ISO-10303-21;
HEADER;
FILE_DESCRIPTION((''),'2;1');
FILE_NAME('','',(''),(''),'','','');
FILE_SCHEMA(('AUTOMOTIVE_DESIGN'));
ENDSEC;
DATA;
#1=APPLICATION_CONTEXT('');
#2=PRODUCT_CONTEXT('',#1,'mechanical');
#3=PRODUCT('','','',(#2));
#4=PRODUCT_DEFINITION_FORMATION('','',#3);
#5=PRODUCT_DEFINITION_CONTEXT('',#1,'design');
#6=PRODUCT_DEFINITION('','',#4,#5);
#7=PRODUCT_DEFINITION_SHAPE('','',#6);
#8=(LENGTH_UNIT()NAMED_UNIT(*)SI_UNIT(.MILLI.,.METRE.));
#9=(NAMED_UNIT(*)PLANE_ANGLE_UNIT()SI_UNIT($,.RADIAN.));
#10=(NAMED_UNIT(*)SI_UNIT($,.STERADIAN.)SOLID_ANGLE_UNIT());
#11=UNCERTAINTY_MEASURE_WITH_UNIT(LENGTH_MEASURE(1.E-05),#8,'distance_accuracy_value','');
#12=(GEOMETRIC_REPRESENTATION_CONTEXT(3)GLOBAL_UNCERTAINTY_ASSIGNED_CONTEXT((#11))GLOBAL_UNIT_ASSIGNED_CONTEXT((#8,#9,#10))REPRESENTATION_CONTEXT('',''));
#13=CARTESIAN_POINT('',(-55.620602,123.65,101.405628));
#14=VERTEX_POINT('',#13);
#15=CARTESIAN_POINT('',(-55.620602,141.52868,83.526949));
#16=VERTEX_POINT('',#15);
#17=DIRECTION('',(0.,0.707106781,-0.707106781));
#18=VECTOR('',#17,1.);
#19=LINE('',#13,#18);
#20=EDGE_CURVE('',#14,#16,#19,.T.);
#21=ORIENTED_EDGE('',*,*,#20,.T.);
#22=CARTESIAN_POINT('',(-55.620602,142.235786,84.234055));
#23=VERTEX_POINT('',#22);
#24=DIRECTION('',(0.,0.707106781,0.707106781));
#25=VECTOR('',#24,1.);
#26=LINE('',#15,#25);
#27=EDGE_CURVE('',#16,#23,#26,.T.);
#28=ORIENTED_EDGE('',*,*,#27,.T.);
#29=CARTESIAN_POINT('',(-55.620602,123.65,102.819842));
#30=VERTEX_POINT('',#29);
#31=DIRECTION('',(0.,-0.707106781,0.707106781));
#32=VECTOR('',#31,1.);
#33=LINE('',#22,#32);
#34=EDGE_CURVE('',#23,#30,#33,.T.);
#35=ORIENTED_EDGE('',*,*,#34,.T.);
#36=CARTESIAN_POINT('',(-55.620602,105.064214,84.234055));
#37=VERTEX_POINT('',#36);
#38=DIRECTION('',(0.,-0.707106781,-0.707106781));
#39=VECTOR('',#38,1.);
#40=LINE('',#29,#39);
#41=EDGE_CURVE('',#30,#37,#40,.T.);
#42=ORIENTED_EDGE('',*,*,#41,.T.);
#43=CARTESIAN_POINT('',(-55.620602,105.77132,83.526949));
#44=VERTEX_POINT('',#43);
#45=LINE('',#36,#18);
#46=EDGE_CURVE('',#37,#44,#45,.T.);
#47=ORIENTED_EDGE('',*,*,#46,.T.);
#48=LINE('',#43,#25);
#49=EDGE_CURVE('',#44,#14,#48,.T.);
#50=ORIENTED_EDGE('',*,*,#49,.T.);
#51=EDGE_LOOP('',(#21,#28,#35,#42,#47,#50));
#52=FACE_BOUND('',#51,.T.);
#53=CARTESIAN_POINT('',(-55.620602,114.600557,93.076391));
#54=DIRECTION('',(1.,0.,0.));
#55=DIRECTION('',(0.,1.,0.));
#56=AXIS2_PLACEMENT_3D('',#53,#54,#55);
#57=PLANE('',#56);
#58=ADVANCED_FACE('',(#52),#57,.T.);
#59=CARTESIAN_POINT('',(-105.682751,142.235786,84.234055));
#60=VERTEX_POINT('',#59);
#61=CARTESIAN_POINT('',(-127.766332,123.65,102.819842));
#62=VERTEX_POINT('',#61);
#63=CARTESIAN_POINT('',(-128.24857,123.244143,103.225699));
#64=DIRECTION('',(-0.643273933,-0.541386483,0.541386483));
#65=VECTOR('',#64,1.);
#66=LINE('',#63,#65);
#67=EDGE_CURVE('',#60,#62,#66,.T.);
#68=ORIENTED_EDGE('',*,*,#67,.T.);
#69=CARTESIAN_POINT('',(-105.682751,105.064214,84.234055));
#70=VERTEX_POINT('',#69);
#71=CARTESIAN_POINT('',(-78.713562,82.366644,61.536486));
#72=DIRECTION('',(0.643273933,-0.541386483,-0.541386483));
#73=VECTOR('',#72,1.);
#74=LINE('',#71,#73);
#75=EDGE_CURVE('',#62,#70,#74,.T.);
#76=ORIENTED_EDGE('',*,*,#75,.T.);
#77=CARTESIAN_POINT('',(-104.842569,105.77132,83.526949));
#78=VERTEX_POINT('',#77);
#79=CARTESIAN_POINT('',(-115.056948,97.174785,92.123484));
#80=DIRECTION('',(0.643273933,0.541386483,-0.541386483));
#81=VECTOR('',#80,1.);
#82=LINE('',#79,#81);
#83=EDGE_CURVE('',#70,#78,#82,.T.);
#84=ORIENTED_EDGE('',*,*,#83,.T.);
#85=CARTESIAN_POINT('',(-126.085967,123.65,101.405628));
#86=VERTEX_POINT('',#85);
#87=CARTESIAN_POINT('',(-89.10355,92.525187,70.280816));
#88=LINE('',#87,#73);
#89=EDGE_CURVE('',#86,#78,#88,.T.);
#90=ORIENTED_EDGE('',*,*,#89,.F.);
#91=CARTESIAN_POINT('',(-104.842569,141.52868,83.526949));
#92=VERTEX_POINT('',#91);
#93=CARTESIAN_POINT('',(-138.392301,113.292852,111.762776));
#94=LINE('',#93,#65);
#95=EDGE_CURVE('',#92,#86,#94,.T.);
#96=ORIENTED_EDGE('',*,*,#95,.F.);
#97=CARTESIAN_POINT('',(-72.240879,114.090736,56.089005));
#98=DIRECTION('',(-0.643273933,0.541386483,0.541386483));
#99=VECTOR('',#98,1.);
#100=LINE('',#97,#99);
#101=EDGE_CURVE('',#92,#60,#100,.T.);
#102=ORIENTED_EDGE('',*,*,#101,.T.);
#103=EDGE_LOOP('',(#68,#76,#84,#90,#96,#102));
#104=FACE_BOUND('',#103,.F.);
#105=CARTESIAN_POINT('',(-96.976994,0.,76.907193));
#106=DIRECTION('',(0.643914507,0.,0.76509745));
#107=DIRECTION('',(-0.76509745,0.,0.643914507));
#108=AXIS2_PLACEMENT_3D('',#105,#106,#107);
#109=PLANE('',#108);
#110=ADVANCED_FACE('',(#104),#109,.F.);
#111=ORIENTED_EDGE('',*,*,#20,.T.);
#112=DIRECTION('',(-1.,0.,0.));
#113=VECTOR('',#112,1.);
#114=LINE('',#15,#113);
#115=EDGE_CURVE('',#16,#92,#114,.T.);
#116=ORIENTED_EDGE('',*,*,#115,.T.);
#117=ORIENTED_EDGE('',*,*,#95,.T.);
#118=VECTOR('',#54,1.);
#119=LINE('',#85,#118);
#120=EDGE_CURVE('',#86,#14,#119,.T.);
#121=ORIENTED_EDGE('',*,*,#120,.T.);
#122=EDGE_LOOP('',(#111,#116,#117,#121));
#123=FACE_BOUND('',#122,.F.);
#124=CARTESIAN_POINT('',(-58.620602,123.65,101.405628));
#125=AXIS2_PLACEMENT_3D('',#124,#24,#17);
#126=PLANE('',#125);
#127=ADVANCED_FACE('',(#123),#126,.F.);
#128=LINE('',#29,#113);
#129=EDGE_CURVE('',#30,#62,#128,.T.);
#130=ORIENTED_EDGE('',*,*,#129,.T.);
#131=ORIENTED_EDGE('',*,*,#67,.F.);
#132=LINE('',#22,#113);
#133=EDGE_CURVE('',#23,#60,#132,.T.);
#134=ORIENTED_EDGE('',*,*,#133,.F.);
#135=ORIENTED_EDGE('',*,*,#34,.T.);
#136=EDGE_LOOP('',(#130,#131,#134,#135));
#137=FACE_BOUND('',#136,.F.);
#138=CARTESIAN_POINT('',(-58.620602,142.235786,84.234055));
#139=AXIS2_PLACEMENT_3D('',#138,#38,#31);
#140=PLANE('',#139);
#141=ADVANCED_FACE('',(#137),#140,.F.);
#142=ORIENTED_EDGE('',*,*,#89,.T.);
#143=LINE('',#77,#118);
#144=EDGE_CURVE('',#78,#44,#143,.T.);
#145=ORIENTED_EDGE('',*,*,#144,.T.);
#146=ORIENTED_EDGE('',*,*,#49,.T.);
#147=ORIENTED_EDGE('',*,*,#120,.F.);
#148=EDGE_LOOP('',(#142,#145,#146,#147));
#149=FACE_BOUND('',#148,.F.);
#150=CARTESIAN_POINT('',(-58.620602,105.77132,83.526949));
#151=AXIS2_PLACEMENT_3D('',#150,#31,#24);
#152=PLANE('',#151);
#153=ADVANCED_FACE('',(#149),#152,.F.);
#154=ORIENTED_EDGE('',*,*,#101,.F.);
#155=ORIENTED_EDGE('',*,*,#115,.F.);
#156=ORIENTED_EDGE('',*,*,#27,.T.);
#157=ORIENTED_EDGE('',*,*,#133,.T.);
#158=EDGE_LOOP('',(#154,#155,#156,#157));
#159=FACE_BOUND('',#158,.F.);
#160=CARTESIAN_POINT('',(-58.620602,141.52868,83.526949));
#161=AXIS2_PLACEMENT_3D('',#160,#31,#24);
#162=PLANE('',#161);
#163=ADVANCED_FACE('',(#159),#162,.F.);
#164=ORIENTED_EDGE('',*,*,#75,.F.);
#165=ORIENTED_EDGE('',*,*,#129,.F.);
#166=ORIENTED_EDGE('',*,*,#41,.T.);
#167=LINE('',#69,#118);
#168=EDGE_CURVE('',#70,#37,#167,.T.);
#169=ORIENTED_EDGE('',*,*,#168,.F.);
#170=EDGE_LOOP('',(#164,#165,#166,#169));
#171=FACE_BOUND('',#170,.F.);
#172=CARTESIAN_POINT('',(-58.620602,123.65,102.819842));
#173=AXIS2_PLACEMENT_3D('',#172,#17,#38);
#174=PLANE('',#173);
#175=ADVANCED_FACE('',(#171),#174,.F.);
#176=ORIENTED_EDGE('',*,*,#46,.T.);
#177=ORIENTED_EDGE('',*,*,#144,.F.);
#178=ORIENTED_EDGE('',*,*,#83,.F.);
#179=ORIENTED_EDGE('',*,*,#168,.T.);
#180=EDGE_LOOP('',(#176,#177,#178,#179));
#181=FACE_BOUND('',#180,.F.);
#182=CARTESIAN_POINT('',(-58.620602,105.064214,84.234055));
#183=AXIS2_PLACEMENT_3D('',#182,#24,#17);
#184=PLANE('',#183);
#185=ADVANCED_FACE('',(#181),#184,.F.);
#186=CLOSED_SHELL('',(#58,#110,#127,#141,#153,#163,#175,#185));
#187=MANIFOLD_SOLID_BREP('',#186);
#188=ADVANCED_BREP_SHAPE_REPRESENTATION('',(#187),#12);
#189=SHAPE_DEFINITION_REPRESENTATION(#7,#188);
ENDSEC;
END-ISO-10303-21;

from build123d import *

# Parameters (mm, degrees)
F1_DEPTH  = 247.3
F3_DEPTH  = 300
F4_DEPTH  = 50
F5_DEPTH  = 59.1
F6_DEPTH  = 300
F7_DEPTH  = 300
F8_DEPTH  = 17.109
F9_DEPTH  = 1.9
F10_DEPTH = 1
F11_DEPTH = 3


with BuildPart() as f1:
    # F0 (on Front) → F1 (new body)
    with BuildSketch(Plane.XZ):
        Polygon((-78.8866152354, 43.4383174348), (-78.6296018241, 42.9628188217), (-78.6296018241, 102.819841868), (-127.7663317061, 102.819841868), (-96.9769939736, 76.9071934711), align=None)
        Polygon((-79.7663317061, 42.9628188217), (-97.7663317061, 76.264485822), (-127.7663317061, 101.5128188217), (-157.7663317061, 76.264485822), (-175.7663317061, 42.9628188217), align=None)
        Polygon((-127.7663317061, 101.5128188217), (-97.7663317061, 76.264485822), (-79.7663317061, 42.9628188217), (-78.6296018241, 42.9628188217), (-78.8866152354, 43.4383174348), (-96.9769939736, 76.9071934711), (-127.7663317061, 102.819841868), (-158.5556694386, 76.9071934711), (-176.9030615881, 42.9628188217), (-175.7663317061, 42.9628188217), (-157.7663317061, 76.264485822), align=None)
        Polygon((-176.9030615881, 102.819841868), (-176.9030615881, 42.9628188217), (-158.5556694386, 76.9071934711), (-127.7663317061, 102.819841868), align=None)
    extrude(amount=-F1_DEPTH)

    # F0 (on Front) → F3 (cut)
    with BuildSketch(Plane.XZ):
        Polygon((-78.8866152354, 43.4383174348), (-78.6296018241, 42.9628188217), (-78.6296018241, 102.819841868), (-127.7663317061, 102.819841868), (-96.9769939736, 76.9071934711), align=None)
    extrude(amount=-F3_DEPTH, mode=Mode.SUBTRACT)

    # F2 (on face) → F4 (join)
    with BuildSketch(Plane.YZ.offset(-78.6296018241)):
        Polygon((142.2357864376, 84.2340554304), (123.65, 102.819841868), (123.65, 101.4056283057), (141.5286796564, 83.5269486492), align=None)
        Polygon((123.65, 101.4056283057), (123.65, 102.819841868), (105.0642135624, 84.2340554304), (105.7713203436, 83.5269486492), align=None)
    extrude(amount=-F4_DEPTH)

    # F2 (on face) → F5 (join)
    with BuildSketch(Plane.YZ.offset(-78.6296018241)):
        Polygon((103.65, 42.9628188217), (123.65, 42.9628188217), (123.65, 82.819841868), (106.4784271247, 82.819841868), (105.0642135624, 82.819841868), (103.65, 82.819841868), align=None)
        Polygon((123.65, 42.9628188217), (143.65, 42.9628188217), (143.65, 82.819841868), (142.2357864376, 82.819841868), (140.8215728753, 82.819841868), (123.65, 82.819841868), align=None)
    extrude(amount=-F5_DEPTH)

    # F2 (on face) → F6 (cut)
    with BuildSketch(Plane.YZ.offset(-78.6296018241)):
        Polygon((247.3, 42.9628188217), (247.3, 102.819841868), (123.65, 102.819841868), (142.2357864376, 84.2340554304), (141.5286796564, 83.5269486492), (142.2357864376, 82.819841868), (143.65, 82.819841868), (143.65, 42.9628188217), align=None)
        Polygon((105.0642135624, 84.2340554304), (123.65, 102.819841868), (0, 102.819841868), (0, 42.9628188217), (103.65, 42.9628188217), (103.65, 82.819841868), (105.0642135624, 82.819841868), (105.7713203436, 83.5269486492), align=None)
        Polygon((123.65, 42.9628188217), (143.65, 42.9628188217), (143.65, 82.819841868), (142.2357864376, 82.819841868), (140.8215728753, 82.819841868), (123.65, 82.819841868), align=None)
        Polygon((103.65, 42.9628188217), (123.65, 42.9628188217), (123.65, 82.819841868), (106.4784271247, 82.819841868), (105.0642135624, 82.819841868), (103.65, 82.819841868), align=None)
    extrude(amount=-F6_DEPTH, mode=Mode.SUBTRACT)

    # F0 (on Front) → F7 (cut)
    with BuildSketch(Plane.XZ):
        Polygon((-176.9030615881, 102.819841868), (-176.9030615881, 42.9628188217), (-158.5556694386, 76.9071934711), (-127.7663317061, 102.819841868), align=None)
        Polygon((-127.7663317061, 101.5128188217), (-97.7663317061, 76.264485822), (-79.7663317061, 42.9628188217), (-78.6296018241, 42.9628188217), (-78.8866152354, 43.4383174348), (-96.9769939736, 76.9071934711), (-127.7663317061, 102.819841868), (-158.5556694386, 76.9071934711), (-176.9030615881, 42.9628188217), (-175.7663317061, 42.9628188217), (-157.7663317061, 76.264485822), align=None)
        Polygon((-79.7663317061, 42.9628188217), (-97.7663317061, 76.264485822), (-127.7663317061, 101.5128188217), (-157.7663317061, 76.264485822), (-175.7663317061, 42.9628188217), align=None)
    extrude(amount=-F7_DEPTH, mode=Mode.SUBTRACT)

    # F2 (on face) → F8 (join)
    with BuildSketch(Plane.YZ.offset(-78.6296018241)):
        Polygon((123.65, 101.4056283057), (123.65, 102.819841868), (105.0642135624, 84.2340554304), (105.7713203436, 83.5269486492), align=None)
        Polygon((142.2357864376, 84.2340554304), (123.65, 102.819841868), (123.65, 101.4056283057), (141.5286796564, 83.5269486492), align=None)
    extrude(amount=F8_DEPTH)

    # F9 (add): a face of the model
    f9_faces = [f1.faces().sort_by_distance(p)[0] for p in [
        (-61.5206018241, 114.6532437055, 93.2308117249),
    ]]
    extrude(f9_faces, amount=F9_DEPTH)

    # F10 (add): a face of the model
    f10_faces = [f1.faces().sort_by_distance(p)[0] for p in [
        (-59.6206018241, 114.6532437055, 93.2308117249),
    ]]
    extrude(f10_faces, amount=F10_DEPTH)

    # F11 (add): a face of the model
    f11_faces = [f1.faces().sort_by_distance(p)[0] for p in [
        (-58.6206018241, 114.6532437055, 93.2308117249),
    ]]
    extrude(f11_faces, amount=F11_DEPTH)


solid = f1.part
